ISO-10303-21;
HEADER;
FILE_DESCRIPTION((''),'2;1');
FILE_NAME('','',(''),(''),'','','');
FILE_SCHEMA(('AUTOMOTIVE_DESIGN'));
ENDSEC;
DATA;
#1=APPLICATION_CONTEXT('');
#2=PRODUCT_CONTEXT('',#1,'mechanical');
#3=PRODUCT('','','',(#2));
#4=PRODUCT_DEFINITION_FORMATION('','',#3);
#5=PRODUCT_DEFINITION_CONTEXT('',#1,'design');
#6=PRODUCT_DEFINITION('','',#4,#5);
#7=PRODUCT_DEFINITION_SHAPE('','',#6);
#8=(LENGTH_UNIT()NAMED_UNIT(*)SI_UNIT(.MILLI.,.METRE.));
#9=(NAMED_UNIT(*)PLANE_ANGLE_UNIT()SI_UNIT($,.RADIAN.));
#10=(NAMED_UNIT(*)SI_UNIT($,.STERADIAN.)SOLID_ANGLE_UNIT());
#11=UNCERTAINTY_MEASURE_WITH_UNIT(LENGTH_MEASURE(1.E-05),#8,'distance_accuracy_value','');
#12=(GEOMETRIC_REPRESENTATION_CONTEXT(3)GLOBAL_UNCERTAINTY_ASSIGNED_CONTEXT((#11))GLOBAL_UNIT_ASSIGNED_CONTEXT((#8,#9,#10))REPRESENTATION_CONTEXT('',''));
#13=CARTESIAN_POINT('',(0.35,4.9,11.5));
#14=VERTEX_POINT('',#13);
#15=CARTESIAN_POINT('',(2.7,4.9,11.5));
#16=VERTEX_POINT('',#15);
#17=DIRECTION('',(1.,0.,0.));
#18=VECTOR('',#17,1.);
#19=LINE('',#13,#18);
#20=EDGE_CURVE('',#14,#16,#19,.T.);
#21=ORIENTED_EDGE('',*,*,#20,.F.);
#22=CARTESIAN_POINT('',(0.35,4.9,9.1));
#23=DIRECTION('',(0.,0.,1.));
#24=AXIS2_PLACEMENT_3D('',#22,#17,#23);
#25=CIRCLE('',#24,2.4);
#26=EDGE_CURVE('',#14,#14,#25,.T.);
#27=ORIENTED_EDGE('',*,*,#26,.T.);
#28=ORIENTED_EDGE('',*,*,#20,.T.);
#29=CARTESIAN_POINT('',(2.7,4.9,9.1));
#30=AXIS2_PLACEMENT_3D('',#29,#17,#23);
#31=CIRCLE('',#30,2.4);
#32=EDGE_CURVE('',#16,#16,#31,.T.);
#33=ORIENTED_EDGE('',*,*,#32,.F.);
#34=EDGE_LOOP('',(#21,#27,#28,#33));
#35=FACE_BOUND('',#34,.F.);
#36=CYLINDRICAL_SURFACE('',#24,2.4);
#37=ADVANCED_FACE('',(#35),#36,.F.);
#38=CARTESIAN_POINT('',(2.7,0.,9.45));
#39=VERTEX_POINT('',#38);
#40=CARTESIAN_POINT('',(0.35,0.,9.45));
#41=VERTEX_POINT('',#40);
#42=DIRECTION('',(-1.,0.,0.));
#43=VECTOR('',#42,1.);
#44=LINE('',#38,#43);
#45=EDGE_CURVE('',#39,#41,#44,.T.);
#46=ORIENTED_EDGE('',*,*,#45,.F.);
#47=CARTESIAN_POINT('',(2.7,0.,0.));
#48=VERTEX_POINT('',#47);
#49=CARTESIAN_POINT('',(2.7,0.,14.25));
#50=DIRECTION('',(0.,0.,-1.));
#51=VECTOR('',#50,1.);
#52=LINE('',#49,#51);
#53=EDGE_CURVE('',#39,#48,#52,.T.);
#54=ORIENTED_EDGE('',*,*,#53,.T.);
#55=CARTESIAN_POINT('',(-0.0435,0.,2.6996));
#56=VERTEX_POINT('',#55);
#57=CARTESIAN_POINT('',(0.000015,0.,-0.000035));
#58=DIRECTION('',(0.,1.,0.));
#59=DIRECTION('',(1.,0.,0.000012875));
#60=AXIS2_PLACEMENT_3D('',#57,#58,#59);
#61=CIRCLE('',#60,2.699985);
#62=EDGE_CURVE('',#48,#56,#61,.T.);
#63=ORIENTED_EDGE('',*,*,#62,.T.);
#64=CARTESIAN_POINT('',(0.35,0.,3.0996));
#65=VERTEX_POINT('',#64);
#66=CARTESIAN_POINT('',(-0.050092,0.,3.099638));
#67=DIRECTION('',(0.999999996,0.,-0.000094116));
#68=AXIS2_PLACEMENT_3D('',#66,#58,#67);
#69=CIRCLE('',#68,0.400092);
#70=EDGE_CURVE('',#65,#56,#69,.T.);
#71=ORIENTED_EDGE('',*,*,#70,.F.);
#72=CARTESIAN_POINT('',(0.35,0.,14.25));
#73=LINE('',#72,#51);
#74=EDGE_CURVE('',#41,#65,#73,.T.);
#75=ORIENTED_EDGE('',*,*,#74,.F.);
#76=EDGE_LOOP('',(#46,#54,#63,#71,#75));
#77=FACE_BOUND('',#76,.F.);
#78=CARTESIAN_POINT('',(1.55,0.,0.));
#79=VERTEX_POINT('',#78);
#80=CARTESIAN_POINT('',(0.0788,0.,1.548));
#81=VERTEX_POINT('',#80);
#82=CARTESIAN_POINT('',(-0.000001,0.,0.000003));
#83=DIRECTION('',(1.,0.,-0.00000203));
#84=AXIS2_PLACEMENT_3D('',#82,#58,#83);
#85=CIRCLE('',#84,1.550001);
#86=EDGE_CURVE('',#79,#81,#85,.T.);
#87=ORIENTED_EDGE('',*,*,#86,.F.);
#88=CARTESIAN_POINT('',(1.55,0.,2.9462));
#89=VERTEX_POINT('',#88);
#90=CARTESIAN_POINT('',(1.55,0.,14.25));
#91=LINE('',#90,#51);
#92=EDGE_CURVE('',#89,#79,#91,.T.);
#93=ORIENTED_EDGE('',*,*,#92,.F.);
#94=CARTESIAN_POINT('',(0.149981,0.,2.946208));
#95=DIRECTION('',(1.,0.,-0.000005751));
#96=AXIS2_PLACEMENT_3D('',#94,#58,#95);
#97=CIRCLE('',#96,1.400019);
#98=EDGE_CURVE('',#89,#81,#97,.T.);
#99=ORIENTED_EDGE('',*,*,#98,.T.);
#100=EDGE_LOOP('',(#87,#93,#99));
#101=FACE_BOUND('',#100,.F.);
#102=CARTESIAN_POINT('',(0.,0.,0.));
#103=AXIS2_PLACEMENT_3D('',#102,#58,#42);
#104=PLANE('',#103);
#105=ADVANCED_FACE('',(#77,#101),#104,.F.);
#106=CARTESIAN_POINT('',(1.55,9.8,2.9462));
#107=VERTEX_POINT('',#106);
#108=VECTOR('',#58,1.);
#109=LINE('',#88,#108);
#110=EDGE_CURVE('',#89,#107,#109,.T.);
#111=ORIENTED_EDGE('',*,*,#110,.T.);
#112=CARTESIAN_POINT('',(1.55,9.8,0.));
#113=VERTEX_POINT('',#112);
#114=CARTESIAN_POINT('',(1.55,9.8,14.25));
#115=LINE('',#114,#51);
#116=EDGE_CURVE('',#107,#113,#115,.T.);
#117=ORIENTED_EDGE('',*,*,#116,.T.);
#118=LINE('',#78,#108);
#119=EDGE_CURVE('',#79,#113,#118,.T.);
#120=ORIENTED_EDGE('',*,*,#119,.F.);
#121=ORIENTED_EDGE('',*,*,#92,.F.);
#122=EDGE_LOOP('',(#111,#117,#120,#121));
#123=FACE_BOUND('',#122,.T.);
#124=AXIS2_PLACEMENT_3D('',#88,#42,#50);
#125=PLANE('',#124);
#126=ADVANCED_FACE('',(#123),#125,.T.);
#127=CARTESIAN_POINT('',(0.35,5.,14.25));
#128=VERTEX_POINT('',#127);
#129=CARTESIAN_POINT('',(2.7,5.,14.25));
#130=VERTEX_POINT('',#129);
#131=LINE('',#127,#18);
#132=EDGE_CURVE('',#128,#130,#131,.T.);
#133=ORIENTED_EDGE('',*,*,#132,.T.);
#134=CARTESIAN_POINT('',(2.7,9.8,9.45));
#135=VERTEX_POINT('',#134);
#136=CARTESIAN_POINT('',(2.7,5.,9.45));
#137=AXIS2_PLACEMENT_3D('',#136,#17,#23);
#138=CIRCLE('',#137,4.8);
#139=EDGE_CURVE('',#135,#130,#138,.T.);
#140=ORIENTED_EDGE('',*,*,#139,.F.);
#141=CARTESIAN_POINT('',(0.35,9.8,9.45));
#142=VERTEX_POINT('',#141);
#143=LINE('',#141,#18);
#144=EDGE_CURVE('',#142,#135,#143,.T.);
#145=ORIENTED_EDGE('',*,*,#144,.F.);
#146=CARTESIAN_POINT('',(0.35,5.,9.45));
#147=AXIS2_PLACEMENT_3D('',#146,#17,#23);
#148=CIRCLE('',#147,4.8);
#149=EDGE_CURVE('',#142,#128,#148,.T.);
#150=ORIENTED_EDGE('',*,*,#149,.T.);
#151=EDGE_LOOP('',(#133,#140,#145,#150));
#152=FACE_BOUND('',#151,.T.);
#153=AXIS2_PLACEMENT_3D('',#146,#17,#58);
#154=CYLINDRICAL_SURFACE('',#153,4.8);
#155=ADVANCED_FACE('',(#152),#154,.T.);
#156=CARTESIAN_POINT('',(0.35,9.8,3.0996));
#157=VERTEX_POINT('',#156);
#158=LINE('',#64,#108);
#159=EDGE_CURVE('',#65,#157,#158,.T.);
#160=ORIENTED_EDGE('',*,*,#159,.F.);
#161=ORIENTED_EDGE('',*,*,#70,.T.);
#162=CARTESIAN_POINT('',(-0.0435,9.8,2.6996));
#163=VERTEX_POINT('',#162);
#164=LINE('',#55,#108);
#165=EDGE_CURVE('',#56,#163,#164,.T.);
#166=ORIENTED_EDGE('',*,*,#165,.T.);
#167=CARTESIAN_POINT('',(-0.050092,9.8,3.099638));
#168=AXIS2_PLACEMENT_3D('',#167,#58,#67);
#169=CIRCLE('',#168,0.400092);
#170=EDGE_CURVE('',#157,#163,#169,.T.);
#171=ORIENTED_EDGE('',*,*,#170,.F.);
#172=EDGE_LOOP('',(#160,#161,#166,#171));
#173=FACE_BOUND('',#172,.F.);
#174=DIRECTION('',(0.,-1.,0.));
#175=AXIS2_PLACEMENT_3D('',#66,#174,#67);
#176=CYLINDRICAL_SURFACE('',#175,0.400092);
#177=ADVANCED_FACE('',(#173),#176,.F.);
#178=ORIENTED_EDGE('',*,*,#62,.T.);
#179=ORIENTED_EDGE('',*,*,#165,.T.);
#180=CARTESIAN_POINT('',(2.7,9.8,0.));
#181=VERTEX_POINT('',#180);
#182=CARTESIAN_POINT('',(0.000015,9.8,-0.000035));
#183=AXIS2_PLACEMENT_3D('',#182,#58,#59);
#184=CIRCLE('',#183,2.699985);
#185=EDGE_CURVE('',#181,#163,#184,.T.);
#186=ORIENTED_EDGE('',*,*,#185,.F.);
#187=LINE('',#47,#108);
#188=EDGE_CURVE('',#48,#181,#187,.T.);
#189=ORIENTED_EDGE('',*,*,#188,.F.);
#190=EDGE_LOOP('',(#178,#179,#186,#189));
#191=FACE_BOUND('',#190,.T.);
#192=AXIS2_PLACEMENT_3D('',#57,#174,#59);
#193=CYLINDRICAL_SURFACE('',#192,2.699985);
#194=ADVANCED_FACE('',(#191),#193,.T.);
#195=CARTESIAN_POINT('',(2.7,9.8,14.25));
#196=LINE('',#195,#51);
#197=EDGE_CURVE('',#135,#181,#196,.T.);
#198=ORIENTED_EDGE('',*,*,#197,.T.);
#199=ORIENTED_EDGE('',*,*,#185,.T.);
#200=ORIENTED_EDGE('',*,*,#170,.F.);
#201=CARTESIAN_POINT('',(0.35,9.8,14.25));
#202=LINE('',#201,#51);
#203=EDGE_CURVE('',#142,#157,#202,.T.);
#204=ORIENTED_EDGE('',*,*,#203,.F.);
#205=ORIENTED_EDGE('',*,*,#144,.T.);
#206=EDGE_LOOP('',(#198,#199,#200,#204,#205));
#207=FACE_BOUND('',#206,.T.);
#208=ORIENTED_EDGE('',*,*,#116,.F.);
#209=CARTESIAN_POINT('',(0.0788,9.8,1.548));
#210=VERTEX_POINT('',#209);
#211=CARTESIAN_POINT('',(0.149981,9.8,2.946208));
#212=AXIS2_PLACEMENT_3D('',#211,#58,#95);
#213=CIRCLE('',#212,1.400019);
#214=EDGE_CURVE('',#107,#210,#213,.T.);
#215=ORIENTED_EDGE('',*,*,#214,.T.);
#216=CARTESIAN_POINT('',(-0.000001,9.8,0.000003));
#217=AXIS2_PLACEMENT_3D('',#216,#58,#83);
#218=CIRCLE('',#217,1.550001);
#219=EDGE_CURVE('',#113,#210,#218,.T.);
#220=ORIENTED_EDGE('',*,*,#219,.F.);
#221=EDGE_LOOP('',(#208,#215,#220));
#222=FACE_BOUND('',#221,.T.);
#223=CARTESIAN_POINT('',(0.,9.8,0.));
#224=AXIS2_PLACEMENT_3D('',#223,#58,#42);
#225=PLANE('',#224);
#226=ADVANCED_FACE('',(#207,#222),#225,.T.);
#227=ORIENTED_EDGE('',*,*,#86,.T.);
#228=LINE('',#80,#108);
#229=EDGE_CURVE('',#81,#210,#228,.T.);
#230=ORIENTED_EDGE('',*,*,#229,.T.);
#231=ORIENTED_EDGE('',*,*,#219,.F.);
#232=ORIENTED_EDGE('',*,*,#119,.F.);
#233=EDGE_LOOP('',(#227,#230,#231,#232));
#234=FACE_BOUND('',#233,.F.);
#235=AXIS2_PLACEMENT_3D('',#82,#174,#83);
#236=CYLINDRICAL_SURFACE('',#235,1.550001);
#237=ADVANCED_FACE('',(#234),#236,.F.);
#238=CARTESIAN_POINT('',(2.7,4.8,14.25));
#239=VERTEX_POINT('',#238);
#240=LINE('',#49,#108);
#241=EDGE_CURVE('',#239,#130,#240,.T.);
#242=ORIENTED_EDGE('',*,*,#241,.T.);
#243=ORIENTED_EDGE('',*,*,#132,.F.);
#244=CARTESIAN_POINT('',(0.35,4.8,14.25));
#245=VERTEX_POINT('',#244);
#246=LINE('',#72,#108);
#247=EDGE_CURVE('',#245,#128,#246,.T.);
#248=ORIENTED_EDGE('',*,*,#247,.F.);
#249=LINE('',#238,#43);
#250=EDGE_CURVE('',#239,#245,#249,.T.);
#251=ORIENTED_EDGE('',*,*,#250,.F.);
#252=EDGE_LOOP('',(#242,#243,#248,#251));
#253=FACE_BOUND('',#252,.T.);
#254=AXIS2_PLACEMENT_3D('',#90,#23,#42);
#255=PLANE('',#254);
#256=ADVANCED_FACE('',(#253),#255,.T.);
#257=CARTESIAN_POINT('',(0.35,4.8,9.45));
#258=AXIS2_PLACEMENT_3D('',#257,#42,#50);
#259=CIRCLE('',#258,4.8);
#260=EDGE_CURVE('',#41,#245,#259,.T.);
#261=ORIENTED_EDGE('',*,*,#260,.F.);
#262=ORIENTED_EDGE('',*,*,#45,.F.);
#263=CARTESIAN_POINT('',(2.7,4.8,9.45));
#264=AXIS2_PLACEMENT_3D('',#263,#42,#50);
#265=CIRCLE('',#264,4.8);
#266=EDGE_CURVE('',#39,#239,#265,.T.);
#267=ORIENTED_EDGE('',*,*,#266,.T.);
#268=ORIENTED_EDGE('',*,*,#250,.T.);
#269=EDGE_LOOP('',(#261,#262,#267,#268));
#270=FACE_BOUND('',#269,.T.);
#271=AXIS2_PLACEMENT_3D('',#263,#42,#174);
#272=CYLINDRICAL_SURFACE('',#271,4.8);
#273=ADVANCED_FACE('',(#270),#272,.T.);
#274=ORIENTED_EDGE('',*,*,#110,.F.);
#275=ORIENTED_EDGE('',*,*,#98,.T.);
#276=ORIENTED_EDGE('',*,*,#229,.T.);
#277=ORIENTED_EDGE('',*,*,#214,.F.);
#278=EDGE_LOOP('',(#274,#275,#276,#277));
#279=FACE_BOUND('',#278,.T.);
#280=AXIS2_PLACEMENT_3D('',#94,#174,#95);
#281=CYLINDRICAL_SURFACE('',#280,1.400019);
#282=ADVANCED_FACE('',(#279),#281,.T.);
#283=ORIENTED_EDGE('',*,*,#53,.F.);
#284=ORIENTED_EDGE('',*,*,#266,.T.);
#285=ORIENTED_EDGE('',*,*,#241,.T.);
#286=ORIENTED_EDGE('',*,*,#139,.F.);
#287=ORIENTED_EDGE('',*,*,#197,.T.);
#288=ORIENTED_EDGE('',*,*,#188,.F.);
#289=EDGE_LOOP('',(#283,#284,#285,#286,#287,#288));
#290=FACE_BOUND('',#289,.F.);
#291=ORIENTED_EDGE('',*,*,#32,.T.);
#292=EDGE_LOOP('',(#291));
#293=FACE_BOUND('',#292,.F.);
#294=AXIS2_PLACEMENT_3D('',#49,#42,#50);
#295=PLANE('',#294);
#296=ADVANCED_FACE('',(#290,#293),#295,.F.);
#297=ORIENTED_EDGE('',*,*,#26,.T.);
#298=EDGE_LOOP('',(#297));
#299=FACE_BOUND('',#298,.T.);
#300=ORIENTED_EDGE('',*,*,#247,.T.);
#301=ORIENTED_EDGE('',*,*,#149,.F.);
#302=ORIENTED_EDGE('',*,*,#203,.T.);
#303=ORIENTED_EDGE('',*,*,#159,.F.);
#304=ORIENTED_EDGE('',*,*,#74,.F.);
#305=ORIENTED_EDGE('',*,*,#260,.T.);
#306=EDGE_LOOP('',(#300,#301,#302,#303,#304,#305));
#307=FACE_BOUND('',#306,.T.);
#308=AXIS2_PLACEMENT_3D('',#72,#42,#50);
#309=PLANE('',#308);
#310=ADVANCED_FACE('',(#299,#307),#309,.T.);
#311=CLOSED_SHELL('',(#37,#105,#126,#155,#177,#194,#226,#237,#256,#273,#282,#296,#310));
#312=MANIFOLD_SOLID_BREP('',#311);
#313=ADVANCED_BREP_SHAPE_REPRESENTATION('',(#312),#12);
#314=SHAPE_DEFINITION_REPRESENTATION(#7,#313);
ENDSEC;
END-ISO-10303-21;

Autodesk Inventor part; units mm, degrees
ref_plane "YZ Plane" through (0, 0, 0) normal (1, 0, 0) x (0, 1, 0)
ref_plane "XZ Plane" through (0, 0, 0) normal (0, 1, 0) x (-1, 0, 0)
ref_plane "XY Plane" through (0, 0, 0) normal (0, 0, 1) x (1, 0, 0)
sketch "Sketch1" plane through (0, 0, 0) normal (0, 1, 0) x (-1, 0, 0)
  arc A0 (-1.55, 0) -> (-0.0788, 1.548) centre (0, 0) ccw
  line L0 (-1.55, 14.25) -> (-1.55, 0)
  arc A1 (-1.55, 2.9462) -> (-0.0788, 1.548) centre (-0.15, 2.9462) ccw
  arc A2 (-0.35, 3.0996) -> (0.0435, 2.6996) centre (0.05, 3.0996) ccw
  line L1 (-1.55, 14.25) -> (-0.35, 14.25)
  line L2 (-0.35, 14.25) -> (-0.35, 3.0996)
  line L3 (-2.7, 14.25) -> (-2.7, 0)
  line L4 (-2.7, 14.25) -> (-1.55, 14.25)
  arc A3 (-2.7, 0) -> (0.0435, 2.6996) centre (0, 0) ccw
  dimension "d0" = 3.1
  dimension "d1" = 2.8
  dimension "d2" = 14.25
  dimension "d6" = 0.8
extrude "Extrusion1" add sketch "Sketch1" along normal blind 9.8
sketch "Sketch2" plane through (0.35, 0, 3.0996) normal (-1, 0, 0) x (0, 0, 1)
  line L0 (6.0004, -8.6055) -> (6.0004, 17.2383) construction
  line L1 (-11.7051, 4.9) -> (18.5644, 4.9) construction
  line L2 (11.1504, 0) -> (11.1504, 9.8) construction
  line L3 (-3.0996, 0) -> (-0.3999, 0) construction
  line L4 (-0.3999, 0) -> (-0.3999, 9.8) construction
  line L5 (-3.0996, 9.8) -> (-0.3999, 9.8) construction
  line L6 (-3.0996, 0) -> (-3.0996, 9.8) construction
  line L7 (-3.0996, 0) -> (-3.0996, 9.8) construction
  line L8 (-5.7996, 0) -> (-5.7996, 9.8) construction
  point P0 (11.1504, 4.9)
  point P1 (6.0004, 4.9)
  dimension "d9" = 11.8
hole "Hole1" at (0.35, 4.9, 9.1) direction (1, 0, 0) diameter 4.8 end through all
fillet "Fillet1" radius 4.8 2 edges at (1.525, 9.8, 14.25) (1.525, 0, 14.25)
properties part number "Cable Clip 3-1Dia RS817-8956"
